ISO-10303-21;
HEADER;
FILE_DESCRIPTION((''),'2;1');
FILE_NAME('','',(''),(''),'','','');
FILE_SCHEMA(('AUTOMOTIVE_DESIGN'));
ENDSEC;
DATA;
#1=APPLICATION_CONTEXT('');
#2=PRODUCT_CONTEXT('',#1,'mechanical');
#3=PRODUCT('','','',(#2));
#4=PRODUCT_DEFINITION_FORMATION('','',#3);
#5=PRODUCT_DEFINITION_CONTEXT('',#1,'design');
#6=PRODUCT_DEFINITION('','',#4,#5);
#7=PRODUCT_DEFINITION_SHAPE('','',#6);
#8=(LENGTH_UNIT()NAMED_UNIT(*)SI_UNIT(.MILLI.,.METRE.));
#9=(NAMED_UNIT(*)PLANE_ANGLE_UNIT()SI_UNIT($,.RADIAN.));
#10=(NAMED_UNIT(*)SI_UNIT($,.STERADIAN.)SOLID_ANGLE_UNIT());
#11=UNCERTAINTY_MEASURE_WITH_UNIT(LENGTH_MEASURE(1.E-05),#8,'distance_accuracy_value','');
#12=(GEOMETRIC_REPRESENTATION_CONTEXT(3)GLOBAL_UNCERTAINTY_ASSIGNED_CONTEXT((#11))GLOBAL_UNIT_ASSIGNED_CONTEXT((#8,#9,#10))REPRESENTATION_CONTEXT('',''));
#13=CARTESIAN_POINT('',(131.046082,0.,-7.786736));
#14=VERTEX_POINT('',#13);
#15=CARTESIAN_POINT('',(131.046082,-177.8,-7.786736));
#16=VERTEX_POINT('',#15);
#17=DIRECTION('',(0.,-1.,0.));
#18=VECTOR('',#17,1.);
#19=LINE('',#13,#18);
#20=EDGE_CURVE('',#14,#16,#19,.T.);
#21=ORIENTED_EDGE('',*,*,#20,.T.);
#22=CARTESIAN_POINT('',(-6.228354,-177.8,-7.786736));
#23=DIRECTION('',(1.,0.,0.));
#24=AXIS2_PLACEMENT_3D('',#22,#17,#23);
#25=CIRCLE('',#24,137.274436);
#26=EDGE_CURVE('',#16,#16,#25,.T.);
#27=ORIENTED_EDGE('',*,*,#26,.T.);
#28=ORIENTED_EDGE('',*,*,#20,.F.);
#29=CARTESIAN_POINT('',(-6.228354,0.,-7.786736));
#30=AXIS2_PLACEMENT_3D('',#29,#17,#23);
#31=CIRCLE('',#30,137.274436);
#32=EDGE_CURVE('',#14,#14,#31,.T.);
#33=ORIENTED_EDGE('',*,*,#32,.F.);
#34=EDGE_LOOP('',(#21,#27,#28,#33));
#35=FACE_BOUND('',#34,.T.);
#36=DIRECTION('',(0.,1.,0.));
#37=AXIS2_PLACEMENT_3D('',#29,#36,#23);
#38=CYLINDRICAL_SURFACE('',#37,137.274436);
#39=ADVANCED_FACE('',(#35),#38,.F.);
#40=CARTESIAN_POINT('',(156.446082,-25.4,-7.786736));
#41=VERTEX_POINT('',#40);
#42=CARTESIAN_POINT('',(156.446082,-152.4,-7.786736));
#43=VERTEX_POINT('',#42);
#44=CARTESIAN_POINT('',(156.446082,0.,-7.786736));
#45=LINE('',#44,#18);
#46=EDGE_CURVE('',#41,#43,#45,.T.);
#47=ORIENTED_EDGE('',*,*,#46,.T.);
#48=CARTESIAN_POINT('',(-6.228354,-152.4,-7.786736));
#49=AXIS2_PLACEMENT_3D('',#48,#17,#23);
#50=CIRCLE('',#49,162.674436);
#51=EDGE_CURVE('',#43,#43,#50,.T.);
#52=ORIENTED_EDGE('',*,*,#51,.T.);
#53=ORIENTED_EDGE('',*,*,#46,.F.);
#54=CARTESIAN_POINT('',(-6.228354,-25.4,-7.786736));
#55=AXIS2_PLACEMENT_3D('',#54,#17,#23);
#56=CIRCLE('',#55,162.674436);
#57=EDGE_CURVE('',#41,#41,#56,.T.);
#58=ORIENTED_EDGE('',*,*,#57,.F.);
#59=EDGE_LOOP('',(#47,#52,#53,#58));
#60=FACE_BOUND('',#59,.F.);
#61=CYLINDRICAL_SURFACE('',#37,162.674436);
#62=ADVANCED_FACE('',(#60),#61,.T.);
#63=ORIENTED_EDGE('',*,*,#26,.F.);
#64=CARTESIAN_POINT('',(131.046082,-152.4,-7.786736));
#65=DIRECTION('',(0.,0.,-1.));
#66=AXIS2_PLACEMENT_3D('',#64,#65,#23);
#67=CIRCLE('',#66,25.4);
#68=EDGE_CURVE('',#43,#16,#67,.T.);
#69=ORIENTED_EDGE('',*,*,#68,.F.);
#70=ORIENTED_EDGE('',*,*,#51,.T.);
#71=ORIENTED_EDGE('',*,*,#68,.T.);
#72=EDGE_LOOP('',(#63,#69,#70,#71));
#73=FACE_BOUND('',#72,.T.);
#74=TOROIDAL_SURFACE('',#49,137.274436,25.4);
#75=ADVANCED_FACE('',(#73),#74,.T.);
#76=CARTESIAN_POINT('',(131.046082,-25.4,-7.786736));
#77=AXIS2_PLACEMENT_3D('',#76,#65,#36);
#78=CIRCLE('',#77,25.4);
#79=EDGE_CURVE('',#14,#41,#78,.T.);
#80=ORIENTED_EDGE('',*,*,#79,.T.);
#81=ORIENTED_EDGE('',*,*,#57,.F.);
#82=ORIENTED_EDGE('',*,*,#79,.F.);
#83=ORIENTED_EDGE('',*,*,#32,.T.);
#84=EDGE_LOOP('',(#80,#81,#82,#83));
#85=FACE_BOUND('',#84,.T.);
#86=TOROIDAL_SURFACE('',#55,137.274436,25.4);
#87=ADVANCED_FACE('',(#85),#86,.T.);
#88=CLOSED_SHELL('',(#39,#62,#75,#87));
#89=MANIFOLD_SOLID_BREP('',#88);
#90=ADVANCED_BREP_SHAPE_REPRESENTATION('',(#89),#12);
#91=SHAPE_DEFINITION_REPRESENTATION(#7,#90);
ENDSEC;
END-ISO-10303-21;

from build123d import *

# Parameters (mm, degrees)
F0_R     = 137.2744361776
F1_DEPTH = 177.8
F2_T     = 25.4


# Not quite as in the source:
# - a fillet or chamfer that OpenCascade refuses, or shapes differently, is made with other operations: its cross-section is extruded or revolved along the edge and cut away or added


with BuildPart() as f1:
    # F0 (on Front) → F1 (new body)
    with BuildSketch(Plane.XZ):
        with Locations((-6.2283538282, -7.7867358923)):
            Circle(F0_R)
    extrude(amount=F1_DEPTH)

    # F2
    f2_openings = [f1.faces().sort_by_distance(p)[0] for p in [
        (-6.228354, -177.8, -7.786736),
        (-6.228354, 0, -7.786736),
    ]]
    offset(amount=F2_T, openings=f2_openings)

    # F3: fillet of radius 25.4 on 2 edges, made by hand

    # F3_s1 → F3_t2 (revolve, cut)
    with BuildSketch(Plane.XY.offset(-7.7867358923)):
        with BuildLine():
            ThreePointArc((131.0460823494, 0), (149.0065945915, -7.4394877579), (156.4460823494, -25.4))
            Line((156.4460823494, -25.4), (156.4460823494, 0))
            Line((156.4460823494, 0), (131.0460823494, 0))
        make_face()
    revolve(axis=Axis((-6.2283538282, 0, -7.7867358923), (0, -1, 0)), mode=Mode.SUBTRACT)

    # F3_s3 → F3_t4 (revolve, cut)
    with BuildSketch(Plane.XY.offset(-7.7867358923)):
        with BuildLine():
            ThreePointArc((156.4460823494, -152.4), (149.0065945915, -170.3605122421), (131.0460823494, -177.8))
            Line((131.0460823494, -177.8), (156.4460823494, -177.8))
            Line((156.4460823494, -177.8), (156.4460823494, -152.4))
        make_face()
    revolve(axis=Axis((-6.2283538282, -177.8, -7.7867358923), (0, -1, 0)), mode=Mode.SUBTRACT)


solid = f1.part
